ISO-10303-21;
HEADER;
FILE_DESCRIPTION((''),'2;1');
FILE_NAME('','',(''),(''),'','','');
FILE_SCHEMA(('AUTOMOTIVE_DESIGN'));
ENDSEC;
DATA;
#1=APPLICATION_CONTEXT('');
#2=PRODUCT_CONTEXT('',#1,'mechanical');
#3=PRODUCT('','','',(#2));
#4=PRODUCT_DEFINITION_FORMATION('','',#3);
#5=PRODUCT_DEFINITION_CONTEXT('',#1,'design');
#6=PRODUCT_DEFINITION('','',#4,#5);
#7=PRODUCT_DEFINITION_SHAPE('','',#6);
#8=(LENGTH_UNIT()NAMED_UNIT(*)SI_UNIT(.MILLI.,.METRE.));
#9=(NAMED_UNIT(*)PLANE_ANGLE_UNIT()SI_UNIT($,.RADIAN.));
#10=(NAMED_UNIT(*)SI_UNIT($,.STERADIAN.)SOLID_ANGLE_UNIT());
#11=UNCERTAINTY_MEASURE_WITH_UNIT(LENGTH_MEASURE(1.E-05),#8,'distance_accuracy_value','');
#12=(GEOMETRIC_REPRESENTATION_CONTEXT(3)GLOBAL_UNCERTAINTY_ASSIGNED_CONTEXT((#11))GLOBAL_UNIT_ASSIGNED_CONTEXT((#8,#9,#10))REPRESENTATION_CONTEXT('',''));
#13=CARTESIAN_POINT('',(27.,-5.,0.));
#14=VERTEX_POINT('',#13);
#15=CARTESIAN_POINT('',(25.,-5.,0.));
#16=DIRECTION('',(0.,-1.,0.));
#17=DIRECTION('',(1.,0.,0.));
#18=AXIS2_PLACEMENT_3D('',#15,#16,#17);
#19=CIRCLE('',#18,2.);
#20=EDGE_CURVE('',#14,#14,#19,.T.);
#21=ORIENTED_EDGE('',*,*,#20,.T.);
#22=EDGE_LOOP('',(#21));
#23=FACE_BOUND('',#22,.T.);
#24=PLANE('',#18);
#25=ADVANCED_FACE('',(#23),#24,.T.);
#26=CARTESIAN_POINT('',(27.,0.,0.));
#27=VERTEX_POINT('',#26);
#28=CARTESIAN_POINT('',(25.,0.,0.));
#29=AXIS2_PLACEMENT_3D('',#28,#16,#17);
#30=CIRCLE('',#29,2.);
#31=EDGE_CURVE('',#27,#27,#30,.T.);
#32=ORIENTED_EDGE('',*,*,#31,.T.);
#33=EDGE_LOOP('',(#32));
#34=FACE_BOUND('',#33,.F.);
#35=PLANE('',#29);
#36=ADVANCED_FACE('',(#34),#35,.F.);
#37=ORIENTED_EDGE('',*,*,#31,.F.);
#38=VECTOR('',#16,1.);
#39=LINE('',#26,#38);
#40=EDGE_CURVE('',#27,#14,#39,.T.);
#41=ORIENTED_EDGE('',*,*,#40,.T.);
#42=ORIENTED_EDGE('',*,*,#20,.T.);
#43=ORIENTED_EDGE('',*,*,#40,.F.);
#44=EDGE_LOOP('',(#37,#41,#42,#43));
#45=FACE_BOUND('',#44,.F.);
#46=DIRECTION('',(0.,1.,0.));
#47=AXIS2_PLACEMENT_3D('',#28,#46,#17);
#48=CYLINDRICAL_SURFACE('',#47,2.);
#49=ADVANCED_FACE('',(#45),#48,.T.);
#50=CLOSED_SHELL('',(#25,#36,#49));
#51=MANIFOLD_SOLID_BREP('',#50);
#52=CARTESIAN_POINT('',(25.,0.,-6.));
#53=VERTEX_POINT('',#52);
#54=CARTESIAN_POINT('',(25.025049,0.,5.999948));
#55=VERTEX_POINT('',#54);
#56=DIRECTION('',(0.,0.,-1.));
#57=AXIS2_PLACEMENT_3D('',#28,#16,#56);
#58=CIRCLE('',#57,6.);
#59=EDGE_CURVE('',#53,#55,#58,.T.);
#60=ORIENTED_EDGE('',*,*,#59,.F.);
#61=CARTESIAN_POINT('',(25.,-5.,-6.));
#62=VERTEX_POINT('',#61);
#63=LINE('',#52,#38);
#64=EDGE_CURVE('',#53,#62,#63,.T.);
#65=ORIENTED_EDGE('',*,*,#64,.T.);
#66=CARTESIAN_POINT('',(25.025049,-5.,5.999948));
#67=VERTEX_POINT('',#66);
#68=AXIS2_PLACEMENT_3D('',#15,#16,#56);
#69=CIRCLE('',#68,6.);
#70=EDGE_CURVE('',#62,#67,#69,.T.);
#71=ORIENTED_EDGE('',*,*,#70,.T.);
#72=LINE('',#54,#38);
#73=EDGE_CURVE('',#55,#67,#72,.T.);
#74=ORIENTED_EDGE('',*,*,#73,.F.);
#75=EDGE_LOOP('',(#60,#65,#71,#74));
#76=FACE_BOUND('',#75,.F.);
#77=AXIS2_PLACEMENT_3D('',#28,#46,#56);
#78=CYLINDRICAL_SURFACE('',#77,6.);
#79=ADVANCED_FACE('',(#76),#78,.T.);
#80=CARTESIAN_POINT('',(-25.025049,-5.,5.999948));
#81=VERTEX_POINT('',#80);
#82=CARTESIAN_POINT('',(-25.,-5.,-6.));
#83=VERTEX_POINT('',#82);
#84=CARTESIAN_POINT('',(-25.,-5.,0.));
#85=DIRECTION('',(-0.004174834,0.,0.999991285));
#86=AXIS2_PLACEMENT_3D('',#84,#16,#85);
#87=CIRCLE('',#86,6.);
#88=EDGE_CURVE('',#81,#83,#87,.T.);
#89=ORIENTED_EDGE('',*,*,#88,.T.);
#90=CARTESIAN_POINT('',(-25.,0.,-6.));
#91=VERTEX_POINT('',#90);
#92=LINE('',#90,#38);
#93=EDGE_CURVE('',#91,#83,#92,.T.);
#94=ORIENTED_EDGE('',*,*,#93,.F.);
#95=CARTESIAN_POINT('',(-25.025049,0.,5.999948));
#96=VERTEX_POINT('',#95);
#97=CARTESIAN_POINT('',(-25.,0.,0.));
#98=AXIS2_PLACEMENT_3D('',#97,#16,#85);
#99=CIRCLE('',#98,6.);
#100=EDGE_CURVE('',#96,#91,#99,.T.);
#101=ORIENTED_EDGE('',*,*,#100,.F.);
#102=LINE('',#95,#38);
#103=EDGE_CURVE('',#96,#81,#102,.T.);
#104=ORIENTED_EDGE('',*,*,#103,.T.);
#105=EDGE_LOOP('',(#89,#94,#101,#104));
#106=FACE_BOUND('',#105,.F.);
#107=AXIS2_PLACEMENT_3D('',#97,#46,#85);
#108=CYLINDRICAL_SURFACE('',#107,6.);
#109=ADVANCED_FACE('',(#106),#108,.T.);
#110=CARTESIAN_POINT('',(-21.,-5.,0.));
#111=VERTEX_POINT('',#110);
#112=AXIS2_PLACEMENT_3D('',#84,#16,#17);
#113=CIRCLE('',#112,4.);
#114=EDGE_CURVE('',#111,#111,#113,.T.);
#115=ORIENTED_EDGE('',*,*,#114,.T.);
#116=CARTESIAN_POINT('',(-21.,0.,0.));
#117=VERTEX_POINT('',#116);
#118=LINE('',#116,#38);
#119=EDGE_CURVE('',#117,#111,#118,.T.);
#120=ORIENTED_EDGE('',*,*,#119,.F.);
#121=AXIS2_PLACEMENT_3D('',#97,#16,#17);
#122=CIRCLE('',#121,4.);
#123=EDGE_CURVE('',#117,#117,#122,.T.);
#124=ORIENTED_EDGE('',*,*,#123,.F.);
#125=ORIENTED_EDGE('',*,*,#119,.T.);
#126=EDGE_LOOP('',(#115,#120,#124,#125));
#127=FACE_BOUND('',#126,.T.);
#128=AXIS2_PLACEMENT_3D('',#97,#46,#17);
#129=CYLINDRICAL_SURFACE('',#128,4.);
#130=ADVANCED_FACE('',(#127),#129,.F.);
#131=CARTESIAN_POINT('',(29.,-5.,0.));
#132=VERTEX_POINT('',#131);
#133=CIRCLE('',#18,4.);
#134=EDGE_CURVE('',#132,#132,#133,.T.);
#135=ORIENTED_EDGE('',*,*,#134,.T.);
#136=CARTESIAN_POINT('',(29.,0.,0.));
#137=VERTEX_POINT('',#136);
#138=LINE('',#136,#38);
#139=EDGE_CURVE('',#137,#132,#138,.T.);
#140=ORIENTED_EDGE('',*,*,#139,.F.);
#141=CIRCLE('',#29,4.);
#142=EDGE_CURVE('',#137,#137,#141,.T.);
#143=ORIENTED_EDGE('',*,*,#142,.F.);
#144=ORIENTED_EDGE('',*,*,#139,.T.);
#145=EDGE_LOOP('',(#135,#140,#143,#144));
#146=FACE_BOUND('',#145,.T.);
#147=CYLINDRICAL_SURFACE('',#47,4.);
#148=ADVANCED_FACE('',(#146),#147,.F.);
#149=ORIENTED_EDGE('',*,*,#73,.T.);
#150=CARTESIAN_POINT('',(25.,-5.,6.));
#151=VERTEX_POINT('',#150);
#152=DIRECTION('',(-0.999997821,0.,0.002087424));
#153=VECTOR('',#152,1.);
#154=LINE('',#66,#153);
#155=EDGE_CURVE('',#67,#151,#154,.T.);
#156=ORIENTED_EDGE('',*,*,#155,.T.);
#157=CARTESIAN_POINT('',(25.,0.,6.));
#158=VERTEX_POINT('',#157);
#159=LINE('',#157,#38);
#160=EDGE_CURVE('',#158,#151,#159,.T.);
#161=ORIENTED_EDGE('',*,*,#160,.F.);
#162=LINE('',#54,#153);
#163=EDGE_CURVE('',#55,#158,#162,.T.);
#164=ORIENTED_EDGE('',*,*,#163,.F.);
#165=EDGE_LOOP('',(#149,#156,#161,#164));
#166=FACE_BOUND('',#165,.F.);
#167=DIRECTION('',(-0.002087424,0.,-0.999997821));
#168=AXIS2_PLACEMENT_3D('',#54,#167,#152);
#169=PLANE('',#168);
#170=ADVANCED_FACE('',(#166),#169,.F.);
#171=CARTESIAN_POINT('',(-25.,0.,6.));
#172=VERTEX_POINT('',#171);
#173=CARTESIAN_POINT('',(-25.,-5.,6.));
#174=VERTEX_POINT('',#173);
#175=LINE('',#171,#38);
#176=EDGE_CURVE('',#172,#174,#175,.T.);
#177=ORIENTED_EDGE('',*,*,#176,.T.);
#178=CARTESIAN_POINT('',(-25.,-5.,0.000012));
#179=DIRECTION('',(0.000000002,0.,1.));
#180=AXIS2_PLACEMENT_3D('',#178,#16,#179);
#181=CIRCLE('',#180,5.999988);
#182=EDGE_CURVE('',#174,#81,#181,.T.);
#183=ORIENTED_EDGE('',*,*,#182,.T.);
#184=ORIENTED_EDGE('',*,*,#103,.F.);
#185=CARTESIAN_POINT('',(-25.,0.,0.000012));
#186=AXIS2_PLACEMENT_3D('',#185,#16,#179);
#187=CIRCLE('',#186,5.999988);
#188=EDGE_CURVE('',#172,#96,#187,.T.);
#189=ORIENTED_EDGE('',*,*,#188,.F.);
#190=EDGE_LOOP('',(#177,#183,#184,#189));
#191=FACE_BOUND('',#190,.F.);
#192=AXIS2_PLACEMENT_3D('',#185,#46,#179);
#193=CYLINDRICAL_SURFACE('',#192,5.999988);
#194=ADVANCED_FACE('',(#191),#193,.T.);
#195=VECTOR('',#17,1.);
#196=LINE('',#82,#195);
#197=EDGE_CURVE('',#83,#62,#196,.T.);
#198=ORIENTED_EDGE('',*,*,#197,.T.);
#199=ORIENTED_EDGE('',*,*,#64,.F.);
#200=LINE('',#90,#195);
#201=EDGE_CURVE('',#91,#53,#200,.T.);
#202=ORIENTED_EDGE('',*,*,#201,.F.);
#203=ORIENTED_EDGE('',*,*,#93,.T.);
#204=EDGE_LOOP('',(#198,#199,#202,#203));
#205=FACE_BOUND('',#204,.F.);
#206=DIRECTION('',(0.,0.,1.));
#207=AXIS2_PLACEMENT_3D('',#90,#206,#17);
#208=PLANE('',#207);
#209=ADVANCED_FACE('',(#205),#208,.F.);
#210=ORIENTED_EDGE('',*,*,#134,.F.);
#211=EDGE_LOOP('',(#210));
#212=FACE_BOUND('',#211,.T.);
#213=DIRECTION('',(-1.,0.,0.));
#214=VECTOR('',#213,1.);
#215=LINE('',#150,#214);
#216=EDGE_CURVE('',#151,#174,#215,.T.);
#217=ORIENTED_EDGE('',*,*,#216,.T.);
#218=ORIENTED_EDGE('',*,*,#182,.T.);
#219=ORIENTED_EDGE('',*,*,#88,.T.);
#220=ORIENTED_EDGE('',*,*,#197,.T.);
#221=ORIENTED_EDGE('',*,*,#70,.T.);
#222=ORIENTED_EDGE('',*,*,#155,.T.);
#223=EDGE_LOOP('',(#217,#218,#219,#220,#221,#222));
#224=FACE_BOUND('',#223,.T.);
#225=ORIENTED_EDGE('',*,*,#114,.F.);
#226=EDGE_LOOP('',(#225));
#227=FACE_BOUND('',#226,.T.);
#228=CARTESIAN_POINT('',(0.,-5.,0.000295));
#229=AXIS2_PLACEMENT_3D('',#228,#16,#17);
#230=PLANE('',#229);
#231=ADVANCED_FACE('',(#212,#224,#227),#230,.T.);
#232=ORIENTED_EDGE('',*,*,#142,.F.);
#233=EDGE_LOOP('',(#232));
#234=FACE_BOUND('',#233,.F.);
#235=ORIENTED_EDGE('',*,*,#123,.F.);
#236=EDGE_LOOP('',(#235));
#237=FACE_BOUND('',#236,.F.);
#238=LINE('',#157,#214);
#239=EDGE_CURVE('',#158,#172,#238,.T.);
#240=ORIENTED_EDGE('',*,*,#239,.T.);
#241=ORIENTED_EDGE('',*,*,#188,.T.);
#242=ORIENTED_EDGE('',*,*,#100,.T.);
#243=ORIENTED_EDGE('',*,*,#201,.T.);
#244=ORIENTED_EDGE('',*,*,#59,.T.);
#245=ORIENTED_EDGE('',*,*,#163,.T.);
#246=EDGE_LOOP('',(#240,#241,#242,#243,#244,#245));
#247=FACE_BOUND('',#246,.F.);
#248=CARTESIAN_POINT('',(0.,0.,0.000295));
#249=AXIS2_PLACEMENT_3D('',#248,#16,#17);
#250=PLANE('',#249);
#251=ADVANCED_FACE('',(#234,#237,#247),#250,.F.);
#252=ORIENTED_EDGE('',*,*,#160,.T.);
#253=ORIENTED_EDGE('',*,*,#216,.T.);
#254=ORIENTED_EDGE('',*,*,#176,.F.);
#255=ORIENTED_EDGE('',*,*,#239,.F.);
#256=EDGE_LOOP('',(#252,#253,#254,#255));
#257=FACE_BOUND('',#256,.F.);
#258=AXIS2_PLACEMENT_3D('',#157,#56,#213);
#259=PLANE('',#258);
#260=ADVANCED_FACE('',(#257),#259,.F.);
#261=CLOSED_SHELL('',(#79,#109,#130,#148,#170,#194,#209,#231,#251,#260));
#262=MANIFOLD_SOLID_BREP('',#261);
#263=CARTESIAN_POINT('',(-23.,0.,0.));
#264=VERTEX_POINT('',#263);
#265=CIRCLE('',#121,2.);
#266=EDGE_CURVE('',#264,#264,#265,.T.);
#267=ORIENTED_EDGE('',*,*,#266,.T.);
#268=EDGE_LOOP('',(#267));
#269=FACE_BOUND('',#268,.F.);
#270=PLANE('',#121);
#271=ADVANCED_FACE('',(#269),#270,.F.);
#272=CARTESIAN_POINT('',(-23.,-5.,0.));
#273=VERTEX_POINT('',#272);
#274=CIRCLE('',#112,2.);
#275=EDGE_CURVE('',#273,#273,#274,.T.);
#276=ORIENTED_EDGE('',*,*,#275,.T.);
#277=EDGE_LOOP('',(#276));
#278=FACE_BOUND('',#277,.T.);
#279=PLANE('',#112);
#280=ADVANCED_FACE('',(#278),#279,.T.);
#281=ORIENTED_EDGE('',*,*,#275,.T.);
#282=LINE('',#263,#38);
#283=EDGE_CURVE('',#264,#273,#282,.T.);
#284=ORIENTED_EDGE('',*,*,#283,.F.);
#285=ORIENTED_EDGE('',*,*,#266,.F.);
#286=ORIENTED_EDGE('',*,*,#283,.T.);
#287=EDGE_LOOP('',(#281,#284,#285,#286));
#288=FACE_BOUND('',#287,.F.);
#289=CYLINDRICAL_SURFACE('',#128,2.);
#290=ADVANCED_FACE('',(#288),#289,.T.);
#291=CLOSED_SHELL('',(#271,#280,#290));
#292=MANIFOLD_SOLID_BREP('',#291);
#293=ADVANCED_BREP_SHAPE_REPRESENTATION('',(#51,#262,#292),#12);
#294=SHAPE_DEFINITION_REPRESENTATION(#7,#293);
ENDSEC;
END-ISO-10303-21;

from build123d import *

# Parameters (mm, degrees)
F0_R     = 4
F1_DEPTH = 5
F0_R_2   = 2


# Not quite as in the source:
# - ends of sketch curves that miss each other by under 0.0002 mm in the source are joined


with BuildPart() as f1:
    # F0 (on Front) → F1 (new body)
    with BuildSketch(Plane.XZ):
        with BuildLine():
            Line((0, 6), (-25, 6))
            ThreePointArc((-25, 6), (-25.0125245304, 5.999986928), (-25.0250490062, 5.999947712))
            ThreePointArc((-25.0250490062, 5.999947712), (-30.999986928, -0.0125245304), (-25, -6))
            Line((-25, -6), (0, -6))
            Line((0, -6), (25, -6))
            ThreePointArc((25, -6), (30.999986928, -0.0125245304), (25.0250490062, 5.999947712))
            Line((25.0250490062, 5.999947712), (25, 6))
            Line((25, 6), (0, 6))
        make_face()
        with Locations((-25, 0)):
            Circle(F0_R, mode=Mode.SUBTRACT)
        with Locations((25, 0)):
            Circle(F0_R, mode=Mode.SUBTRACT)
    extrude(amount=F1_DEPTH)


with BuildPart() as f1b:
    # F0 (on Front) → F1, piece 2 (new body)
    with BuildSketch(Plane.XZ):
        with Locations((-25, 0)):
            Circle(F0_R_2)
    extrude(amount=F1_DEPTH)


with BuildPart() as f1c:
    # F0 (on Front) → F1, piece 3 (new body)
    with BuildSketch(Plane.XZ):
        with Locations((25, 0)):
            Circle(F0_R_2)
    extrude(amount=F1_DEPTH)


solid = Compound([f1.part, f1b.part, f1c.part])
